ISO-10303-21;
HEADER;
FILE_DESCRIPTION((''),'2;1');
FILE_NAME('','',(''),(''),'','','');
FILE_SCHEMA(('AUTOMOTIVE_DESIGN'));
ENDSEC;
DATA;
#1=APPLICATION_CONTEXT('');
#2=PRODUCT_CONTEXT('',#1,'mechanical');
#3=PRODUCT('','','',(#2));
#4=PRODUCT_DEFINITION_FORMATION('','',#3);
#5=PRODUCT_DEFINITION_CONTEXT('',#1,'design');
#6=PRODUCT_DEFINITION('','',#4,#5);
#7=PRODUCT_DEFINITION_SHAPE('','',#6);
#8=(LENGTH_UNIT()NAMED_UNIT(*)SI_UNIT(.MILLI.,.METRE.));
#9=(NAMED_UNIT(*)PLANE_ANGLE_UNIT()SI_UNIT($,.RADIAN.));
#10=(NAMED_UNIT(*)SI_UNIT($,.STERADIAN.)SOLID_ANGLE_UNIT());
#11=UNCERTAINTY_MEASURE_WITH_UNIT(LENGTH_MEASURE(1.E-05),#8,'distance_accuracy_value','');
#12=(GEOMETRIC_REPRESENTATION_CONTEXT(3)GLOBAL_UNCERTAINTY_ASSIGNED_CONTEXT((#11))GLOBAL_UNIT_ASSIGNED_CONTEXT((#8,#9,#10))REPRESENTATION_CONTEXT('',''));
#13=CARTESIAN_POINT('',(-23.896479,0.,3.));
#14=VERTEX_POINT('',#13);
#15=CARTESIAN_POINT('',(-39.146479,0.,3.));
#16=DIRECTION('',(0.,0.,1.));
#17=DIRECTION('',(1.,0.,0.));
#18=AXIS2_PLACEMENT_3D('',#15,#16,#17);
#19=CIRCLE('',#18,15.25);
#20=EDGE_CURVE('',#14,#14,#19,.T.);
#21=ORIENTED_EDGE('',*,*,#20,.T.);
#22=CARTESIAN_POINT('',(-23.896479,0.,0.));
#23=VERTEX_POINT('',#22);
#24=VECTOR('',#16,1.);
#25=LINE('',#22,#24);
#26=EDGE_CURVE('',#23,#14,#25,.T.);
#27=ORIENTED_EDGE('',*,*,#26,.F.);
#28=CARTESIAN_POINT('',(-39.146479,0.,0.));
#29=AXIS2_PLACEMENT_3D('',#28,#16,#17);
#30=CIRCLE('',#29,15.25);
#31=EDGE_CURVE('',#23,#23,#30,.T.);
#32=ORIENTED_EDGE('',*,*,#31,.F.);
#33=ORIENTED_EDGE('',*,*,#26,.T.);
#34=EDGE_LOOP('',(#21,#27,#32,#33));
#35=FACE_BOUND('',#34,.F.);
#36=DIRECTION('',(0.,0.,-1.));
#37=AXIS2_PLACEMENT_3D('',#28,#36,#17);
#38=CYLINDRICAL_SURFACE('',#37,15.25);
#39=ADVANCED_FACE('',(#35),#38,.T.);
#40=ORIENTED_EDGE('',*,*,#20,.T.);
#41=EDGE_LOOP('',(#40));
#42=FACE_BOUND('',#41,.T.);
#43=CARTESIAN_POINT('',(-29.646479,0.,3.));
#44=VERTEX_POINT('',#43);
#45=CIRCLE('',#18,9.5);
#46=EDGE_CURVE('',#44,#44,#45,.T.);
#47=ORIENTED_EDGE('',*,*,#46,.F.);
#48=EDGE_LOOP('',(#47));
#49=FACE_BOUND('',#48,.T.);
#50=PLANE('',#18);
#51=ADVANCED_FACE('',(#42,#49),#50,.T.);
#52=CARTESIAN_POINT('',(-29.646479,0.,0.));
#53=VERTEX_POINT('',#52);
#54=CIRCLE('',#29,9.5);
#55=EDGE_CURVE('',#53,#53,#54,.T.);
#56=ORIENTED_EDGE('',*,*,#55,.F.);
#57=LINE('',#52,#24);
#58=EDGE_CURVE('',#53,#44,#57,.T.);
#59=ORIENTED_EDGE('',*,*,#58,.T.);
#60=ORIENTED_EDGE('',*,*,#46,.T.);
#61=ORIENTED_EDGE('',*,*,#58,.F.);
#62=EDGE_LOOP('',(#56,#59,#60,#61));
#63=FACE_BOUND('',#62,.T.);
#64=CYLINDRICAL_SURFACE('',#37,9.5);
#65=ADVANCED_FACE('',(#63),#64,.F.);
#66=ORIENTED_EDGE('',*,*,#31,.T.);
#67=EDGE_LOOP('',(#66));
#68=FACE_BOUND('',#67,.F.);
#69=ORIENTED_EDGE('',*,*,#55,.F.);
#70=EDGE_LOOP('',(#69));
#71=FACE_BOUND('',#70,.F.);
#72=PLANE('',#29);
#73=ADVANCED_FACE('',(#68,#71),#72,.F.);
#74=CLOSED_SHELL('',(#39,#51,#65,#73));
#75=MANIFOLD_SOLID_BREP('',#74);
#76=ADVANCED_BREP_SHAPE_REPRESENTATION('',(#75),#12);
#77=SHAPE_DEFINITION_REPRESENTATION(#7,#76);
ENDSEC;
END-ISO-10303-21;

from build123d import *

# Parameters (mm, degrees)
F0_R     = 15.25
F0_R_2   = 9.5
F1_DEPTH = 3


# Not quite as in the source:
# - a feature names something its author has since deleted; it is built from what else it names


with BuildPart() as f1:
    # F0 (on Top) → F1 (new body)
    with BuildSketch(Plane.XY):
        with Locations((-39.1464792192, 0)):
            Circle(F0_R)
        with Locations((-39.1464792192, 0)):
            Circle(F0_R_2, mode=Mode.SUBTRACT)
    extrude(amount=F1_DEPTH)


solid = f1.part
